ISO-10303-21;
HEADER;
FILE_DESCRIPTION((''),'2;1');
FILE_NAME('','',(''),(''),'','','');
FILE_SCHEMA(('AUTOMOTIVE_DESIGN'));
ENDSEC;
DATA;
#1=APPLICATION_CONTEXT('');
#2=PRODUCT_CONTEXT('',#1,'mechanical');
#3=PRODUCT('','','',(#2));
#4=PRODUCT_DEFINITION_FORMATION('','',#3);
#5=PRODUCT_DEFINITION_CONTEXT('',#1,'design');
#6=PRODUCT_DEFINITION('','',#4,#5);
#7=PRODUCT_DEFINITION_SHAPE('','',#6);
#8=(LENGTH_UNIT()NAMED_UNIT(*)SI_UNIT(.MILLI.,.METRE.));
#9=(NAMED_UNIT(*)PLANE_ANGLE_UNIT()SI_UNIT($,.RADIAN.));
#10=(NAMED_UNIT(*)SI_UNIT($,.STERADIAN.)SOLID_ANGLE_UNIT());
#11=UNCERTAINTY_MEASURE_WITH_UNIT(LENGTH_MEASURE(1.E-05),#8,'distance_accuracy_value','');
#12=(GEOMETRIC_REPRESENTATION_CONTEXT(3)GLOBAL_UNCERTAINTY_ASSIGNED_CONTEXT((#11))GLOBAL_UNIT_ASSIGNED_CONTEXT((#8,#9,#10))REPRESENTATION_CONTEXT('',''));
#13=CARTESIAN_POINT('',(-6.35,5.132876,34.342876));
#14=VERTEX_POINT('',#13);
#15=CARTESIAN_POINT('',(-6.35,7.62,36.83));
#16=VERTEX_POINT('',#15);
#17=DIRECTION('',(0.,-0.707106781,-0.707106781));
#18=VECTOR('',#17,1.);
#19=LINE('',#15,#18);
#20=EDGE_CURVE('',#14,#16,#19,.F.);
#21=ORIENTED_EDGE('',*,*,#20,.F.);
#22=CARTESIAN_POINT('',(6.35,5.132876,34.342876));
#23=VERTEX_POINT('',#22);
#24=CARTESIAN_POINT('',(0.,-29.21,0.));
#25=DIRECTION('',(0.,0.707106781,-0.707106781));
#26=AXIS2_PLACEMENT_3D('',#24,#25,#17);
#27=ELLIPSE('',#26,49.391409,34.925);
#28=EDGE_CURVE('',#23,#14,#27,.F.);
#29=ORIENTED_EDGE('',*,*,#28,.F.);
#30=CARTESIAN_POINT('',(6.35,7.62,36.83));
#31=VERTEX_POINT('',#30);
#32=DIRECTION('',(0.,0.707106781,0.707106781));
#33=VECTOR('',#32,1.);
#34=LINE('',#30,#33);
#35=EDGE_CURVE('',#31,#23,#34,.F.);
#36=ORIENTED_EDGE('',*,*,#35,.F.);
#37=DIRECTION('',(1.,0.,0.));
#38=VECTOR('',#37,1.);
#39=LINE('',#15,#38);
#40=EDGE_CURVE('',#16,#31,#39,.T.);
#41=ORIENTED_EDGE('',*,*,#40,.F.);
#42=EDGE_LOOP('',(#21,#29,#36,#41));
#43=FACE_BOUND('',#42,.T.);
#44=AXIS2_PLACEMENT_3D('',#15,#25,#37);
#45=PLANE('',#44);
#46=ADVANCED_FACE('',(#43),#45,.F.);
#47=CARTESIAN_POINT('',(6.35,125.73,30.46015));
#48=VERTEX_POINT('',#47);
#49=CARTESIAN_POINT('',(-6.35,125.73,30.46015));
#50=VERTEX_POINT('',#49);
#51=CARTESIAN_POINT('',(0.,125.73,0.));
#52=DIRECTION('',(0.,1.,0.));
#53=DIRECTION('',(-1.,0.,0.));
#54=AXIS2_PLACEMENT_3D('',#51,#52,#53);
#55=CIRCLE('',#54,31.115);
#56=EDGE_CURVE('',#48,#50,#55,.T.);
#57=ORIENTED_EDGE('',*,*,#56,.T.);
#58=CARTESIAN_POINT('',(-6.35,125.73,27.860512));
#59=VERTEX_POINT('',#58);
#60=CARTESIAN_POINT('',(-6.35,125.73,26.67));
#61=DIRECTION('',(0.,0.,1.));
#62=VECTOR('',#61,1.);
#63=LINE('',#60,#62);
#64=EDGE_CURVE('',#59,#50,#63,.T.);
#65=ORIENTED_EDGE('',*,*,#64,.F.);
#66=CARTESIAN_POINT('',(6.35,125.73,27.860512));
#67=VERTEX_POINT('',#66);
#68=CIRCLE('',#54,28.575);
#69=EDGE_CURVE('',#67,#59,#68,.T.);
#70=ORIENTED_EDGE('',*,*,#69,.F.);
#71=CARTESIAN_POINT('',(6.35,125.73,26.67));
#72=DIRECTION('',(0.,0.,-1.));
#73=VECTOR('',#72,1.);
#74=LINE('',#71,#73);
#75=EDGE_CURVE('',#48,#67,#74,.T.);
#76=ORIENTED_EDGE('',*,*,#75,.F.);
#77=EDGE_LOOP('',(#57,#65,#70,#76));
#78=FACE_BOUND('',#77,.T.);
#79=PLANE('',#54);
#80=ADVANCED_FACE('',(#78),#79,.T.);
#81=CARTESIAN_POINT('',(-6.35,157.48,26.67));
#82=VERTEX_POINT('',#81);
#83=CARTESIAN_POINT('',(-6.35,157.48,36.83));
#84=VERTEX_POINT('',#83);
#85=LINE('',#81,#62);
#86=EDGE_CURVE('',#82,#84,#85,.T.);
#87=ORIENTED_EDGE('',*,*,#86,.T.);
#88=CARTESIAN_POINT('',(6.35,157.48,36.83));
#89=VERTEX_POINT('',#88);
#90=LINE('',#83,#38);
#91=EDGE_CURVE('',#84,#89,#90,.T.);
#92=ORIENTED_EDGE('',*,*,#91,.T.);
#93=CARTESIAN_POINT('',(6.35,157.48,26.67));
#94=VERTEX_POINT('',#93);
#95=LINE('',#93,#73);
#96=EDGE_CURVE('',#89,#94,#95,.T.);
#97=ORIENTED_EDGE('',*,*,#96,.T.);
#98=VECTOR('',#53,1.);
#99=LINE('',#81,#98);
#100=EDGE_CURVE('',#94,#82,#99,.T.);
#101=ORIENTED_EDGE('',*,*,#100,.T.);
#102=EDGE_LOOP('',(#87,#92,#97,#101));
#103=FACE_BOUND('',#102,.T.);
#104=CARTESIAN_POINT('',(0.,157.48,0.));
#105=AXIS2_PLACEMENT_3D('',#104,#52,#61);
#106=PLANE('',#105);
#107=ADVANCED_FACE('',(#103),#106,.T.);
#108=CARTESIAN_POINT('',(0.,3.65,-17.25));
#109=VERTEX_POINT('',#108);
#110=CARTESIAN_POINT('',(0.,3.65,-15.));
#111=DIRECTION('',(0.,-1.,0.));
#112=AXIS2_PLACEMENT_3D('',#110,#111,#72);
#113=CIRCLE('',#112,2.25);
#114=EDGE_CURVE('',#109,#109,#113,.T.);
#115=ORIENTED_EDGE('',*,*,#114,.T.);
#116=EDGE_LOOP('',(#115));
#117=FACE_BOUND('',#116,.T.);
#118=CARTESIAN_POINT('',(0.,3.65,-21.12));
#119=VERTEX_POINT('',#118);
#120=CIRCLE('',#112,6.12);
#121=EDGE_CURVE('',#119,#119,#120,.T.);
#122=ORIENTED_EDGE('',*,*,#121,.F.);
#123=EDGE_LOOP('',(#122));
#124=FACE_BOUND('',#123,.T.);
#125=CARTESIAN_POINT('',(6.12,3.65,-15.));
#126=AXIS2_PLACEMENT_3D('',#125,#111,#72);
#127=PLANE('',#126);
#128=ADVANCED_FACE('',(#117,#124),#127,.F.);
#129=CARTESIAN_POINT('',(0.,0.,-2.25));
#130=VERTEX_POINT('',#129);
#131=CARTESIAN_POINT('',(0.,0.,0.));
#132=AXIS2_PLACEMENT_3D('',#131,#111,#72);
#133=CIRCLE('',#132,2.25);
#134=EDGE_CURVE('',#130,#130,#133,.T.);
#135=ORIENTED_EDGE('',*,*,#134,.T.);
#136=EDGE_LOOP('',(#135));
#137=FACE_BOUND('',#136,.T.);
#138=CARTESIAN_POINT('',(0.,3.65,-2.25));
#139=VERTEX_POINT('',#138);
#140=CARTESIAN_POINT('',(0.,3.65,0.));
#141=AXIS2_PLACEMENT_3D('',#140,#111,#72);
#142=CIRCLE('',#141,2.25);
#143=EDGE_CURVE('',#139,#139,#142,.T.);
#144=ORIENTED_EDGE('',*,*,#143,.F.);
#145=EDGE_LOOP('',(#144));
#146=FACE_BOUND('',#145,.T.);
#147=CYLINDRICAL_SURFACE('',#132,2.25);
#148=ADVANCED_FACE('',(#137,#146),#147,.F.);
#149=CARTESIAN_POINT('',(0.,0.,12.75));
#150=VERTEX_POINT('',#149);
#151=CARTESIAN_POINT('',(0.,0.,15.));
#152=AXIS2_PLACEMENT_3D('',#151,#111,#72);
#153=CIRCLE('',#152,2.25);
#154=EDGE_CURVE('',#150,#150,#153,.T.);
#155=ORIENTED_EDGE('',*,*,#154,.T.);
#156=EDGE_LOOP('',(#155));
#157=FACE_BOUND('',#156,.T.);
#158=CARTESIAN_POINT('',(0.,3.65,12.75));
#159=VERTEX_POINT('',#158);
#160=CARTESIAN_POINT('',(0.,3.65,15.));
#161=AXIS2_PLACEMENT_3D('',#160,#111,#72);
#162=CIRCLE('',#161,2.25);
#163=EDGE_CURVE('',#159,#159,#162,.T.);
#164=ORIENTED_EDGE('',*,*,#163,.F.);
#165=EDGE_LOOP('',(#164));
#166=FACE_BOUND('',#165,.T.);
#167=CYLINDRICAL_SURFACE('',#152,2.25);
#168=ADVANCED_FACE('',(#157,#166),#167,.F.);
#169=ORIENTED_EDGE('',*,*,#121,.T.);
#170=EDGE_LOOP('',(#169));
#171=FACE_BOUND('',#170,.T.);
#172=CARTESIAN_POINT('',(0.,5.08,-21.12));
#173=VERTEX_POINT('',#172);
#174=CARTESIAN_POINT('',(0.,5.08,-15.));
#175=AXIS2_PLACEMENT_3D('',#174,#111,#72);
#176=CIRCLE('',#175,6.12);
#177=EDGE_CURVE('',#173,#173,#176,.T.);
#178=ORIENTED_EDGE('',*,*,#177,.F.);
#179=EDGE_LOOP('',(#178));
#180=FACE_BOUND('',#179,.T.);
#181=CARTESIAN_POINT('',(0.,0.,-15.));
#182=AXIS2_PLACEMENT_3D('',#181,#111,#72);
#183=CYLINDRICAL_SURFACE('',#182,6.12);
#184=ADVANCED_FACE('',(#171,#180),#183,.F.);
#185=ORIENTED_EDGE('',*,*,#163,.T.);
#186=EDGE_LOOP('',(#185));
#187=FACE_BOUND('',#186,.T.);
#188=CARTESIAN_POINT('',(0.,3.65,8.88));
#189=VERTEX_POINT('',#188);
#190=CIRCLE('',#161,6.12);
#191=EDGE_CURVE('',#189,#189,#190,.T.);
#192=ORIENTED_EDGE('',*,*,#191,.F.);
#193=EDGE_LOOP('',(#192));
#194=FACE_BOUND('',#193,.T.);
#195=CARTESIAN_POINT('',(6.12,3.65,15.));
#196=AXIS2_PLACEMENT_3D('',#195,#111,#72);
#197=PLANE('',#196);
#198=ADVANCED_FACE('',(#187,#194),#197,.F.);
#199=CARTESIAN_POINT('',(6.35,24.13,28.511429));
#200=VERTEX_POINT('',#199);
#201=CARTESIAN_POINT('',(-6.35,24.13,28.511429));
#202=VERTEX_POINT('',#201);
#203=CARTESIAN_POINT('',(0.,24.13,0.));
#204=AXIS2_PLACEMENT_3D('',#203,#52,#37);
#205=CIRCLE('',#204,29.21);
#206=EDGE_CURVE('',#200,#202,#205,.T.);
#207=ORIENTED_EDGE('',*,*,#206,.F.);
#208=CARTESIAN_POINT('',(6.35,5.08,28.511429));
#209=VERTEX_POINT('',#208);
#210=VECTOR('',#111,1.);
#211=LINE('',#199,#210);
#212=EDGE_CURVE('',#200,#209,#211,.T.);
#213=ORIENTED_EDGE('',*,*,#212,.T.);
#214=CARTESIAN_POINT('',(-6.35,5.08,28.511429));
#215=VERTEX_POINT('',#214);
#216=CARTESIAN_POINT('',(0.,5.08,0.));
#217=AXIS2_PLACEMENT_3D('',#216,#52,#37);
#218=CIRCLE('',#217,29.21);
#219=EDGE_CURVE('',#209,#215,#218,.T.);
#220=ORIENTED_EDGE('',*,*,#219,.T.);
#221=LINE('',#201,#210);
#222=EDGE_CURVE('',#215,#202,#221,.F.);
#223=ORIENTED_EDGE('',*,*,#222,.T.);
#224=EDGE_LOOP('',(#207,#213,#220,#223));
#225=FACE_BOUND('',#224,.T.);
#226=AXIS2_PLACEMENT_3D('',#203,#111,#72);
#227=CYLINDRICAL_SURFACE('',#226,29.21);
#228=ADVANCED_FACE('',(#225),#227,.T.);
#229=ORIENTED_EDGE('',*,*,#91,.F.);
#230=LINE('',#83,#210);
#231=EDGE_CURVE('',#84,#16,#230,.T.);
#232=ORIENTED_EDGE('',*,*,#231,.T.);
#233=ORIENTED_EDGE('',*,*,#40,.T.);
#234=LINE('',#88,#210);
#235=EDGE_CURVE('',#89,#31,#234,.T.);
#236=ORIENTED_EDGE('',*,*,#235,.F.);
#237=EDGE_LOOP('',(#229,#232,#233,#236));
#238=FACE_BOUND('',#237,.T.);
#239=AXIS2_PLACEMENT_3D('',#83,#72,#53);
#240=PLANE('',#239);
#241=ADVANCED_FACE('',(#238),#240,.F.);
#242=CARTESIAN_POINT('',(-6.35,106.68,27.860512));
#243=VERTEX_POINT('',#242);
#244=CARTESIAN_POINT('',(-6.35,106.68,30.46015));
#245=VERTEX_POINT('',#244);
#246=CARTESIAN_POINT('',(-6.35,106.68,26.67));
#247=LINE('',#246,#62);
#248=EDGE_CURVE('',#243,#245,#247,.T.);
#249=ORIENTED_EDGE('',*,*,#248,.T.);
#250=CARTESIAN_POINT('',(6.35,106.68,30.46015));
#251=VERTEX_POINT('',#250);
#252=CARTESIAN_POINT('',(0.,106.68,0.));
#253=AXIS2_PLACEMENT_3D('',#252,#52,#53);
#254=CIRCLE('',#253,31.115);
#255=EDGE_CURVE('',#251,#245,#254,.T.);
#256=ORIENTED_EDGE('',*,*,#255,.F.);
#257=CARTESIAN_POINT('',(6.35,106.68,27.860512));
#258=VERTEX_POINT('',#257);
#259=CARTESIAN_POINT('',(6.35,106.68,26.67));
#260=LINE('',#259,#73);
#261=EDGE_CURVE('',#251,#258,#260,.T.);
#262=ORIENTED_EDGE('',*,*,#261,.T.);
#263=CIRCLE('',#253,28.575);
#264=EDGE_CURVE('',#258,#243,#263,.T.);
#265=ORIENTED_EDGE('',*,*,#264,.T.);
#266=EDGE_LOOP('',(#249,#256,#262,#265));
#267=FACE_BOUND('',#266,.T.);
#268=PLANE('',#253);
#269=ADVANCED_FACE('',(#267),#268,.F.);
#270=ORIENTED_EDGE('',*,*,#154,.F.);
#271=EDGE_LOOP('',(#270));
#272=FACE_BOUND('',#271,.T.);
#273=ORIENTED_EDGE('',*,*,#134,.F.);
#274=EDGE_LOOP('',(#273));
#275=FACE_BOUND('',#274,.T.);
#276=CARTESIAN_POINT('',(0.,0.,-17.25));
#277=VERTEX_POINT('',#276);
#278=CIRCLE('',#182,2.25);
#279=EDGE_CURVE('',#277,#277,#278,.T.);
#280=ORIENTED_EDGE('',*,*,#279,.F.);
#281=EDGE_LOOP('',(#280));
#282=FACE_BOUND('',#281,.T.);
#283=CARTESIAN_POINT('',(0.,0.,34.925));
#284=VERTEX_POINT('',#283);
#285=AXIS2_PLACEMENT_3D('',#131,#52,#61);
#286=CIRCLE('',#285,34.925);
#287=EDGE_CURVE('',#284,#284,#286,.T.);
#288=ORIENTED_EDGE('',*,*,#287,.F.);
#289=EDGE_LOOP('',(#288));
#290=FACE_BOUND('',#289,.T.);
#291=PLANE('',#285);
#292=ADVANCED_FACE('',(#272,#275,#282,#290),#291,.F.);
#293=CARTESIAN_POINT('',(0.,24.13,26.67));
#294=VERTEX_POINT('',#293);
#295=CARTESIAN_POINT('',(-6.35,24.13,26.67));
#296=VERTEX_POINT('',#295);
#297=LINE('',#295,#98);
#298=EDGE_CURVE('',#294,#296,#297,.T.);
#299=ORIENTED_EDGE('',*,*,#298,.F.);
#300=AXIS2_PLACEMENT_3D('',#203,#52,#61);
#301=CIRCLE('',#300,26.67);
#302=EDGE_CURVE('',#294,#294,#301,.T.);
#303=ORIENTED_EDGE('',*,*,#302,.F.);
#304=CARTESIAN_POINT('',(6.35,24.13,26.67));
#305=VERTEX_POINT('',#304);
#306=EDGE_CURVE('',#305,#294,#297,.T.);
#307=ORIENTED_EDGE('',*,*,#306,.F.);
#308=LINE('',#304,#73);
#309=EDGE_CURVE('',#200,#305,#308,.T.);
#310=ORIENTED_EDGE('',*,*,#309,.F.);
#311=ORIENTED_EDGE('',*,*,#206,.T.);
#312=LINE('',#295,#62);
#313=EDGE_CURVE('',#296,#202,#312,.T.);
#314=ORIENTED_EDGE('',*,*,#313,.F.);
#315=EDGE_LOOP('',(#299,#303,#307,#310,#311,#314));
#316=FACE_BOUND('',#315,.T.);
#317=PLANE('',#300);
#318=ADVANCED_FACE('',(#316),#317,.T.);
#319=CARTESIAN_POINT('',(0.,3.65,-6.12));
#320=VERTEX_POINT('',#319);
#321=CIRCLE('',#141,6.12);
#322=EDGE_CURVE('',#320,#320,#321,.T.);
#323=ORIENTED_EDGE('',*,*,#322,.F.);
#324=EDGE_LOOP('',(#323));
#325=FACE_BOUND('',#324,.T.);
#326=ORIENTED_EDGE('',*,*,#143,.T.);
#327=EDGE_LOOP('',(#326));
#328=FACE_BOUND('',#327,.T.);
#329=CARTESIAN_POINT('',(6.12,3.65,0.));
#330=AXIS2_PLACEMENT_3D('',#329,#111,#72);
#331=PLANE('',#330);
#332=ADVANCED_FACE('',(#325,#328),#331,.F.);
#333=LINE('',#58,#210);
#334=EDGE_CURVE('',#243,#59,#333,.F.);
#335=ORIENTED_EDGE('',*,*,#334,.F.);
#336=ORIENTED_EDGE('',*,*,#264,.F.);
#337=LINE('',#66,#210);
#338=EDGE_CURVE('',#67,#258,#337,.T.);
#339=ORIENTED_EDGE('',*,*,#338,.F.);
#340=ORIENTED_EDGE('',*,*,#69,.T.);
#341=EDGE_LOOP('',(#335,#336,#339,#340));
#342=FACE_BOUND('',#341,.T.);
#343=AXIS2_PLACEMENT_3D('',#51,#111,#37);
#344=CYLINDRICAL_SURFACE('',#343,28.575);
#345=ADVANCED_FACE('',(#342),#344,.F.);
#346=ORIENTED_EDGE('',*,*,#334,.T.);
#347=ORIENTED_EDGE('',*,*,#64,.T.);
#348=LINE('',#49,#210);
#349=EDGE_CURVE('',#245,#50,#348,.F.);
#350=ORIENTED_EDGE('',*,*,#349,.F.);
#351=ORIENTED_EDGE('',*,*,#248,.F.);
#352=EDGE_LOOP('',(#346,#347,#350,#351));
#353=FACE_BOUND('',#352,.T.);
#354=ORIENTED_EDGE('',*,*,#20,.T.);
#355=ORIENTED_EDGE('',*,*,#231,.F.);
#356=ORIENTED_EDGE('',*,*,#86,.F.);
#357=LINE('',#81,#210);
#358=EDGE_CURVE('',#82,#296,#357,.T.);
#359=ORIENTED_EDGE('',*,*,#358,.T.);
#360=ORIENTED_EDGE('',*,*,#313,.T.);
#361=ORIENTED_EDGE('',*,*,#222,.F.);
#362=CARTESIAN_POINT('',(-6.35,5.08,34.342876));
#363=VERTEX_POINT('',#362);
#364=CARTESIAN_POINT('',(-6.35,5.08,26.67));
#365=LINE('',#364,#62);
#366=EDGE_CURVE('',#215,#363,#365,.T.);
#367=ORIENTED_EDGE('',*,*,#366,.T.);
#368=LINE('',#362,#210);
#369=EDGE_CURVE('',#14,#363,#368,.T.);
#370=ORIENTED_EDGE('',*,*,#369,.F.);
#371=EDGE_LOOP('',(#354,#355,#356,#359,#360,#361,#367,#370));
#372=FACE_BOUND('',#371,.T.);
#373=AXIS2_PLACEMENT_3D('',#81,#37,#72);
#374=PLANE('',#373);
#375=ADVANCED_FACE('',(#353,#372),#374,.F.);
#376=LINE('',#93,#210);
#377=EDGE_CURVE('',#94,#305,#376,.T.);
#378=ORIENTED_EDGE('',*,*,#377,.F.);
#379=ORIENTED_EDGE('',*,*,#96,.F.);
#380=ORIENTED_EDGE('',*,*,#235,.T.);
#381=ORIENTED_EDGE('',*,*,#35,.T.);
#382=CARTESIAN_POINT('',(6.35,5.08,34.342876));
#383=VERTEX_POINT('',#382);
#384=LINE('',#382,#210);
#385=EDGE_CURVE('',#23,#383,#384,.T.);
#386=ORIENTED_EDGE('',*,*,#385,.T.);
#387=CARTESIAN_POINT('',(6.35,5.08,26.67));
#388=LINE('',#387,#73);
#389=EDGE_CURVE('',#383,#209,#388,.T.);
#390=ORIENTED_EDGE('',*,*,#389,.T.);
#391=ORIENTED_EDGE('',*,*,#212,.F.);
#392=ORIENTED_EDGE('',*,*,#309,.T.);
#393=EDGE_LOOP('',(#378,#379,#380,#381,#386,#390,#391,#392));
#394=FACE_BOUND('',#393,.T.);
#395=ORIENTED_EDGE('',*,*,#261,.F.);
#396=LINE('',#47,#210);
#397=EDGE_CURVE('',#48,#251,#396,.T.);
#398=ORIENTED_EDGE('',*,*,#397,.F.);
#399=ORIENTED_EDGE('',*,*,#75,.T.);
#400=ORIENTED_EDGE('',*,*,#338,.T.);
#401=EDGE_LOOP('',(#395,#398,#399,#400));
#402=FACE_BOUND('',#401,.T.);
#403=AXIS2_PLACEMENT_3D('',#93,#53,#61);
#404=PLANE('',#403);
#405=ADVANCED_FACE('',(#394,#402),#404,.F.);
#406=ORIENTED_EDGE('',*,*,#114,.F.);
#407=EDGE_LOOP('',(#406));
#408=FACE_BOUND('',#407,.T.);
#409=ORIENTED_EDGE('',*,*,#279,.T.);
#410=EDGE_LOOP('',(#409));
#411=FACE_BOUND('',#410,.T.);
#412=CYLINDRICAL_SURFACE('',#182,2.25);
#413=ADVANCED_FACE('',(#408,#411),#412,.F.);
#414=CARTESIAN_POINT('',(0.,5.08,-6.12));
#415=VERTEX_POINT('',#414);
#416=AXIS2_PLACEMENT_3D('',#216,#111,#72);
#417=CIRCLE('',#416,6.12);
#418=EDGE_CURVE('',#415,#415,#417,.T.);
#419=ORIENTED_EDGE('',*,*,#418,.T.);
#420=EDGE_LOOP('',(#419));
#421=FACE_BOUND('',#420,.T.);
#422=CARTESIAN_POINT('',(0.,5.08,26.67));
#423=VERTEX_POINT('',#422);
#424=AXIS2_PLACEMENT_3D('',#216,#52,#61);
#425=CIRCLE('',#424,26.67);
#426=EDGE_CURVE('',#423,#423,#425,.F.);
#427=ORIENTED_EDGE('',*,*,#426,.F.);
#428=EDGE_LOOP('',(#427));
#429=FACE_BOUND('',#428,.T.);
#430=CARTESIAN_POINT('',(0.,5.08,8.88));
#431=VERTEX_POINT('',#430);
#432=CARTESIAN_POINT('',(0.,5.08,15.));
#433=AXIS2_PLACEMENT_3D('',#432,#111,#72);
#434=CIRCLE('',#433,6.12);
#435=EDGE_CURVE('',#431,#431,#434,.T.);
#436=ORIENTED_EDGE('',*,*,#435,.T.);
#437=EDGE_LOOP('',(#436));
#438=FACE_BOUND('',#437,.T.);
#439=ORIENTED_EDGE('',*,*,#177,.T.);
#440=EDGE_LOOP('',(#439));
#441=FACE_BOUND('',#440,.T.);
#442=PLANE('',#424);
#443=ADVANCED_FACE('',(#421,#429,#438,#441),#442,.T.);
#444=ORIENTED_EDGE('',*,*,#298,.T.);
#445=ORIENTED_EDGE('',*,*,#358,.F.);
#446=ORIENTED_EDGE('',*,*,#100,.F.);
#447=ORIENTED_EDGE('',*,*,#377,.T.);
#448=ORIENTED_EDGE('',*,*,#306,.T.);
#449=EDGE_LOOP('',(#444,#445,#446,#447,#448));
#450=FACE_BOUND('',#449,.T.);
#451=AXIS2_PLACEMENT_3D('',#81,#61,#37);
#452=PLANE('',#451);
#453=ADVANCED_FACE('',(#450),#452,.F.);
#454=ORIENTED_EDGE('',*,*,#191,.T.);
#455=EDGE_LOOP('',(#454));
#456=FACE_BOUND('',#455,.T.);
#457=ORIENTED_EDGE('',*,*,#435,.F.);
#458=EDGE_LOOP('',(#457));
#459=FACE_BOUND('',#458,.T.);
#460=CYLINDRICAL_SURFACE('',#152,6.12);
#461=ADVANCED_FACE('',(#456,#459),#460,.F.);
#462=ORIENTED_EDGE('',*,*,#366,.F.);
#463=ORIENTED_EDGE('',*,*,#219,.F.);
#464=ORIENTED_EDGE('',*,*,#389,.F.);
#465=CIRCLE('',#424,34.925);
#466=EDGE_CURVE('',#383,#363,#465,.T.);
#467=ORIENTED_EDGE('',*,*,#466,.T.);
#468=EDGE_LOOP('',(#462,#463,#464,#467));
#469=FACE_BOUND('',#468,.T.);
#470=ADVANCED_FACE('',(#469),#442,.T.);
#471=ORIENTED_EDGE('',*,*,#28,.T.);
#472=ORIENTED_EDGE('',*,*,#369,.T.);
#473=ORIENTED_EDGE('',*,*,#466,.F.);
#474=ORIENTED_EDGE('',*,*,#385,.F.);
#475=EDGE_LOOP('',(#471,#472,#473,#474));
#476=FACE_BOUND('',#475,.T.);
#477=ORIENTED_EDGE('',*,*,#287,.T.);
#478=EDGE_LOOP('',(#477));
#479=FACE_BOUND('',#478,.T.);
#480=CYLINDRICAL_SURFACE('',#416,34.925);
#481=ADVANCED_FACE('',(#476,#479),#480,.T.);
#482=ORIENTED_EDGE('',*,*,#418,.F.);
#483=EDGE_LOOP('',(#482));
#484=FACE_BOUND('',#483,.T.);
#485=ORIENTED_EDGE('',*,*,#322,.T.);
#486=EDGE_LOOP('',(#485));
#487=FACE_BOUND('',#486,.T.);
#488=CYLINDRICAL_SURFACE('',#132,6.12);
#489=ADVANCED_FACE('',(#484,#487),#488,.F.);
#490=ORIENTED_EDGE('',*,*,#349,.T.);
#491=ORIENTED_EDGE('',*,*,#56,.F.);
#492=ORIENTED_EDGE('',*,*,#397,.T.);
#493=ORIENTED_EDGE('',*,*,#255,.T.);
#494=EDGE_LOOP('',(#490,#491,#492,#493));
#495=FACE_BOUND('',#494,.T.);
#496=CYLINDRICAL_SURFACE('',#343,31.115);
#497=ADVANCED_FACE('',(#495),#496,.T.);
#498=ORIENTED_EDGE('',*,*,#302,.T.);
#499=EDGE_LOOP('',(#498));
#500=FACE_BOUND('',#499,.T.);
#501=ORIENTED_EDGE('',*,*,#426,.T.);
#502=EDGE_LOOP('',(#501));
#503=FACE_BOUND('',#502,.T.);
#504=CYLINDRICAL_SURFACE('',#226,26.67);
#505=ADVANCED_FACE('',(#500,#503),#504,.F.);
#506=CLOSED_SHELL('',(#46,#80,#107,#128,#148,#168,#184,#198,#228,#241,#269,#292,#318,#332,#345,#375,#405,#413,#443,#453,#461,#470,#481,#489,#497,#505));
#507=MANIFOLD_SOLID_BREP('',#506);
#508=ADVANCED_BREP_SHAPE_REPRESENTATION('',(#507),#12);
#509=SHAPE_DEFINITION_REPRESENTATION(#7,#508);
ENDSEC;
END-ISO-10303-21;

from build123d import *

# Parameters (mm, degrees)
SKETCH1_R                 = 34.925
BOSS_EXTRUDE1_DEPTH       = 5.08
SKETCH3_W                 = 12.7
SKETCH3_H                 = 10.16
BOSS_EXTRUDE2_DEPTH       = 152.4
SKETCH4_R                 = 29.21
SKETCH4_R_2               = 26.67
EXTRUDE_THIN1_DEPTH       = 19.05
ADVANCEDHOLE3_START       = 3.65
ADVANCEDHOLE3_OUTLINE_R   = 6.12
ADVANCEDHOLE3_DEPTH       = 1.43
ADVANCEDHOLE3_2_OUTLINE_R = 2.25
ADVANCEDHOLE3_2_DEPTH     = 3.65
CHAMFER1_SIZE             = 2.54
SKETCH14_R                = 31.115
SKETCH14_R_2              = 28.575
EXTRUDE_THIN3_DEPTH       = 19.05


# Read off the part's stored shape, not the designer's step: AdvancedHole3
with BuildPart() as part:
    # Sketch1 → Boss-Extrude1 (new body)
    with BuildSketch(Plane(origin=(0, 0, 0), x_dir=(1, 0, 0), z_dir=(0, 1, 0))):
        with Locations(Location((0, 0, 0), (0, 0, 270))):
            Circle(SKETCH1_R)
    extrude(amount=BOSS_EXTRUDE1_DEPTH)

    # Sketch3 → Boss-Extrude2 (add)
    with BuildSketch(Plane(origin=(0, 5.08, 0), x_dir=(1, 0, 0), z_dir=(0, 1, 0))):
        with Locations((0, -31.75)):
            Rectangle(SKETCH3_W, SKETCH3_H)
    extrude(amount=BOSS_EXTRUDE2_DEPTH)

    # Sketch4 → Extrude-Thin1 (add)
    with BuildSketch(Plane(origin=(0, 5.08, 0), x_dir=(1, 0, 0), z_dir=(0, 1, 0))):
        Circle(SKETCH4_R)
        Circle(SKETCH4_R_2, mode=Mode.SUBTRACT)
    extrude(amount=EXTRUDE_THIN1_DEPTH)

    # AdvancedHole3 outline → AdvancedHole3 (cut)
    with BuildSketch(Plane(origin=(0, 0, 0), x_dir=(1, 0, 0), z_dir=(0, 1, 0)).offset(ADVANCEDHOLE3_START)):
        with Locations((0, 15)):
            Circle(ADVANCEDHOLE3_OUTLINE_R)
        with Locations((0, -15)):
            Circle(ADVANCEDHOLE3_OUTLINE_R)
        Circle(ADVANCEDHOLE3_OUTLINE_R)
    extrude(amount=ADVANCEDHOLE3_DEPTH, mode=Mode.SUBTRACT)

    # AdvancedHole3 2 outline → AdvancedHole3 2 (cut)
    with BuildSketch(Plane(origin=(0, 0, 0), x_dir=(1, 0, 0), z_dir=(0, 1, 0))):
        with Locations((0, 15)):
            Circle(ADVANCEDHOLE3_2_OUTLINE_R)
        with Locations((0, -15)):
            Circle(ADVANCEDHOLE3_2_OUTLINE_R)
        Circle(ADVANCEDHOLE3_2_OUTLINE_R)
    extrude(amount=ADVANCEDHOLE3_2_DEPTH, mode=Mode.SUBTRACT)

    # Chamfer1
    # the kernel refuses this chamfer: 2.54 mm, written as the material it takes off along each edge
    with BuildSketch(Plane(origin=(12.882074789, 5.08, 36.83), x_dir=(0, -0.02749587661058625, -0.9996219169112968), z_dir=(-1, 0, 0))) as chamfer1_piece_1_section:
        Polygon((CHAMFER1_SIZE * 0.999621916911, -CHAMFER1_SIZE * 0.0274958766106), (-CHAMFER1_SIZE * 0.0274958766106, -CHAMFER1_SIZE * 0.999621916911), (0, 0), align=None)
    chamfer1_piece_1 = extrude(amount=25.764149579, mode=Mode.PRIVATE)
    chamfer1_piece_1 = chamfer1_piece_1 - Plane(origin=(0, 5.934504944, 0), x_dir=(0, 0, 1), z_dir=(0, -1, 0)) * Cylinder(34.925, 62, mode=Mode.PRIVATE)
    add(chamfer1_piece_1, mode=Mode.SUBTRACT)

    # Sketch14 → Extrude-Thin3 (add)
    with BuildSketch(Plane.ZX.offset(106.68)):
        Circle(SKETCH14_R)
        Circle(SKETCH14_R_2, mode=Mode.SUBTRACT)
    extrude(amount=EXTRUDE_THIN3_DEPTH)


solid = part.part
